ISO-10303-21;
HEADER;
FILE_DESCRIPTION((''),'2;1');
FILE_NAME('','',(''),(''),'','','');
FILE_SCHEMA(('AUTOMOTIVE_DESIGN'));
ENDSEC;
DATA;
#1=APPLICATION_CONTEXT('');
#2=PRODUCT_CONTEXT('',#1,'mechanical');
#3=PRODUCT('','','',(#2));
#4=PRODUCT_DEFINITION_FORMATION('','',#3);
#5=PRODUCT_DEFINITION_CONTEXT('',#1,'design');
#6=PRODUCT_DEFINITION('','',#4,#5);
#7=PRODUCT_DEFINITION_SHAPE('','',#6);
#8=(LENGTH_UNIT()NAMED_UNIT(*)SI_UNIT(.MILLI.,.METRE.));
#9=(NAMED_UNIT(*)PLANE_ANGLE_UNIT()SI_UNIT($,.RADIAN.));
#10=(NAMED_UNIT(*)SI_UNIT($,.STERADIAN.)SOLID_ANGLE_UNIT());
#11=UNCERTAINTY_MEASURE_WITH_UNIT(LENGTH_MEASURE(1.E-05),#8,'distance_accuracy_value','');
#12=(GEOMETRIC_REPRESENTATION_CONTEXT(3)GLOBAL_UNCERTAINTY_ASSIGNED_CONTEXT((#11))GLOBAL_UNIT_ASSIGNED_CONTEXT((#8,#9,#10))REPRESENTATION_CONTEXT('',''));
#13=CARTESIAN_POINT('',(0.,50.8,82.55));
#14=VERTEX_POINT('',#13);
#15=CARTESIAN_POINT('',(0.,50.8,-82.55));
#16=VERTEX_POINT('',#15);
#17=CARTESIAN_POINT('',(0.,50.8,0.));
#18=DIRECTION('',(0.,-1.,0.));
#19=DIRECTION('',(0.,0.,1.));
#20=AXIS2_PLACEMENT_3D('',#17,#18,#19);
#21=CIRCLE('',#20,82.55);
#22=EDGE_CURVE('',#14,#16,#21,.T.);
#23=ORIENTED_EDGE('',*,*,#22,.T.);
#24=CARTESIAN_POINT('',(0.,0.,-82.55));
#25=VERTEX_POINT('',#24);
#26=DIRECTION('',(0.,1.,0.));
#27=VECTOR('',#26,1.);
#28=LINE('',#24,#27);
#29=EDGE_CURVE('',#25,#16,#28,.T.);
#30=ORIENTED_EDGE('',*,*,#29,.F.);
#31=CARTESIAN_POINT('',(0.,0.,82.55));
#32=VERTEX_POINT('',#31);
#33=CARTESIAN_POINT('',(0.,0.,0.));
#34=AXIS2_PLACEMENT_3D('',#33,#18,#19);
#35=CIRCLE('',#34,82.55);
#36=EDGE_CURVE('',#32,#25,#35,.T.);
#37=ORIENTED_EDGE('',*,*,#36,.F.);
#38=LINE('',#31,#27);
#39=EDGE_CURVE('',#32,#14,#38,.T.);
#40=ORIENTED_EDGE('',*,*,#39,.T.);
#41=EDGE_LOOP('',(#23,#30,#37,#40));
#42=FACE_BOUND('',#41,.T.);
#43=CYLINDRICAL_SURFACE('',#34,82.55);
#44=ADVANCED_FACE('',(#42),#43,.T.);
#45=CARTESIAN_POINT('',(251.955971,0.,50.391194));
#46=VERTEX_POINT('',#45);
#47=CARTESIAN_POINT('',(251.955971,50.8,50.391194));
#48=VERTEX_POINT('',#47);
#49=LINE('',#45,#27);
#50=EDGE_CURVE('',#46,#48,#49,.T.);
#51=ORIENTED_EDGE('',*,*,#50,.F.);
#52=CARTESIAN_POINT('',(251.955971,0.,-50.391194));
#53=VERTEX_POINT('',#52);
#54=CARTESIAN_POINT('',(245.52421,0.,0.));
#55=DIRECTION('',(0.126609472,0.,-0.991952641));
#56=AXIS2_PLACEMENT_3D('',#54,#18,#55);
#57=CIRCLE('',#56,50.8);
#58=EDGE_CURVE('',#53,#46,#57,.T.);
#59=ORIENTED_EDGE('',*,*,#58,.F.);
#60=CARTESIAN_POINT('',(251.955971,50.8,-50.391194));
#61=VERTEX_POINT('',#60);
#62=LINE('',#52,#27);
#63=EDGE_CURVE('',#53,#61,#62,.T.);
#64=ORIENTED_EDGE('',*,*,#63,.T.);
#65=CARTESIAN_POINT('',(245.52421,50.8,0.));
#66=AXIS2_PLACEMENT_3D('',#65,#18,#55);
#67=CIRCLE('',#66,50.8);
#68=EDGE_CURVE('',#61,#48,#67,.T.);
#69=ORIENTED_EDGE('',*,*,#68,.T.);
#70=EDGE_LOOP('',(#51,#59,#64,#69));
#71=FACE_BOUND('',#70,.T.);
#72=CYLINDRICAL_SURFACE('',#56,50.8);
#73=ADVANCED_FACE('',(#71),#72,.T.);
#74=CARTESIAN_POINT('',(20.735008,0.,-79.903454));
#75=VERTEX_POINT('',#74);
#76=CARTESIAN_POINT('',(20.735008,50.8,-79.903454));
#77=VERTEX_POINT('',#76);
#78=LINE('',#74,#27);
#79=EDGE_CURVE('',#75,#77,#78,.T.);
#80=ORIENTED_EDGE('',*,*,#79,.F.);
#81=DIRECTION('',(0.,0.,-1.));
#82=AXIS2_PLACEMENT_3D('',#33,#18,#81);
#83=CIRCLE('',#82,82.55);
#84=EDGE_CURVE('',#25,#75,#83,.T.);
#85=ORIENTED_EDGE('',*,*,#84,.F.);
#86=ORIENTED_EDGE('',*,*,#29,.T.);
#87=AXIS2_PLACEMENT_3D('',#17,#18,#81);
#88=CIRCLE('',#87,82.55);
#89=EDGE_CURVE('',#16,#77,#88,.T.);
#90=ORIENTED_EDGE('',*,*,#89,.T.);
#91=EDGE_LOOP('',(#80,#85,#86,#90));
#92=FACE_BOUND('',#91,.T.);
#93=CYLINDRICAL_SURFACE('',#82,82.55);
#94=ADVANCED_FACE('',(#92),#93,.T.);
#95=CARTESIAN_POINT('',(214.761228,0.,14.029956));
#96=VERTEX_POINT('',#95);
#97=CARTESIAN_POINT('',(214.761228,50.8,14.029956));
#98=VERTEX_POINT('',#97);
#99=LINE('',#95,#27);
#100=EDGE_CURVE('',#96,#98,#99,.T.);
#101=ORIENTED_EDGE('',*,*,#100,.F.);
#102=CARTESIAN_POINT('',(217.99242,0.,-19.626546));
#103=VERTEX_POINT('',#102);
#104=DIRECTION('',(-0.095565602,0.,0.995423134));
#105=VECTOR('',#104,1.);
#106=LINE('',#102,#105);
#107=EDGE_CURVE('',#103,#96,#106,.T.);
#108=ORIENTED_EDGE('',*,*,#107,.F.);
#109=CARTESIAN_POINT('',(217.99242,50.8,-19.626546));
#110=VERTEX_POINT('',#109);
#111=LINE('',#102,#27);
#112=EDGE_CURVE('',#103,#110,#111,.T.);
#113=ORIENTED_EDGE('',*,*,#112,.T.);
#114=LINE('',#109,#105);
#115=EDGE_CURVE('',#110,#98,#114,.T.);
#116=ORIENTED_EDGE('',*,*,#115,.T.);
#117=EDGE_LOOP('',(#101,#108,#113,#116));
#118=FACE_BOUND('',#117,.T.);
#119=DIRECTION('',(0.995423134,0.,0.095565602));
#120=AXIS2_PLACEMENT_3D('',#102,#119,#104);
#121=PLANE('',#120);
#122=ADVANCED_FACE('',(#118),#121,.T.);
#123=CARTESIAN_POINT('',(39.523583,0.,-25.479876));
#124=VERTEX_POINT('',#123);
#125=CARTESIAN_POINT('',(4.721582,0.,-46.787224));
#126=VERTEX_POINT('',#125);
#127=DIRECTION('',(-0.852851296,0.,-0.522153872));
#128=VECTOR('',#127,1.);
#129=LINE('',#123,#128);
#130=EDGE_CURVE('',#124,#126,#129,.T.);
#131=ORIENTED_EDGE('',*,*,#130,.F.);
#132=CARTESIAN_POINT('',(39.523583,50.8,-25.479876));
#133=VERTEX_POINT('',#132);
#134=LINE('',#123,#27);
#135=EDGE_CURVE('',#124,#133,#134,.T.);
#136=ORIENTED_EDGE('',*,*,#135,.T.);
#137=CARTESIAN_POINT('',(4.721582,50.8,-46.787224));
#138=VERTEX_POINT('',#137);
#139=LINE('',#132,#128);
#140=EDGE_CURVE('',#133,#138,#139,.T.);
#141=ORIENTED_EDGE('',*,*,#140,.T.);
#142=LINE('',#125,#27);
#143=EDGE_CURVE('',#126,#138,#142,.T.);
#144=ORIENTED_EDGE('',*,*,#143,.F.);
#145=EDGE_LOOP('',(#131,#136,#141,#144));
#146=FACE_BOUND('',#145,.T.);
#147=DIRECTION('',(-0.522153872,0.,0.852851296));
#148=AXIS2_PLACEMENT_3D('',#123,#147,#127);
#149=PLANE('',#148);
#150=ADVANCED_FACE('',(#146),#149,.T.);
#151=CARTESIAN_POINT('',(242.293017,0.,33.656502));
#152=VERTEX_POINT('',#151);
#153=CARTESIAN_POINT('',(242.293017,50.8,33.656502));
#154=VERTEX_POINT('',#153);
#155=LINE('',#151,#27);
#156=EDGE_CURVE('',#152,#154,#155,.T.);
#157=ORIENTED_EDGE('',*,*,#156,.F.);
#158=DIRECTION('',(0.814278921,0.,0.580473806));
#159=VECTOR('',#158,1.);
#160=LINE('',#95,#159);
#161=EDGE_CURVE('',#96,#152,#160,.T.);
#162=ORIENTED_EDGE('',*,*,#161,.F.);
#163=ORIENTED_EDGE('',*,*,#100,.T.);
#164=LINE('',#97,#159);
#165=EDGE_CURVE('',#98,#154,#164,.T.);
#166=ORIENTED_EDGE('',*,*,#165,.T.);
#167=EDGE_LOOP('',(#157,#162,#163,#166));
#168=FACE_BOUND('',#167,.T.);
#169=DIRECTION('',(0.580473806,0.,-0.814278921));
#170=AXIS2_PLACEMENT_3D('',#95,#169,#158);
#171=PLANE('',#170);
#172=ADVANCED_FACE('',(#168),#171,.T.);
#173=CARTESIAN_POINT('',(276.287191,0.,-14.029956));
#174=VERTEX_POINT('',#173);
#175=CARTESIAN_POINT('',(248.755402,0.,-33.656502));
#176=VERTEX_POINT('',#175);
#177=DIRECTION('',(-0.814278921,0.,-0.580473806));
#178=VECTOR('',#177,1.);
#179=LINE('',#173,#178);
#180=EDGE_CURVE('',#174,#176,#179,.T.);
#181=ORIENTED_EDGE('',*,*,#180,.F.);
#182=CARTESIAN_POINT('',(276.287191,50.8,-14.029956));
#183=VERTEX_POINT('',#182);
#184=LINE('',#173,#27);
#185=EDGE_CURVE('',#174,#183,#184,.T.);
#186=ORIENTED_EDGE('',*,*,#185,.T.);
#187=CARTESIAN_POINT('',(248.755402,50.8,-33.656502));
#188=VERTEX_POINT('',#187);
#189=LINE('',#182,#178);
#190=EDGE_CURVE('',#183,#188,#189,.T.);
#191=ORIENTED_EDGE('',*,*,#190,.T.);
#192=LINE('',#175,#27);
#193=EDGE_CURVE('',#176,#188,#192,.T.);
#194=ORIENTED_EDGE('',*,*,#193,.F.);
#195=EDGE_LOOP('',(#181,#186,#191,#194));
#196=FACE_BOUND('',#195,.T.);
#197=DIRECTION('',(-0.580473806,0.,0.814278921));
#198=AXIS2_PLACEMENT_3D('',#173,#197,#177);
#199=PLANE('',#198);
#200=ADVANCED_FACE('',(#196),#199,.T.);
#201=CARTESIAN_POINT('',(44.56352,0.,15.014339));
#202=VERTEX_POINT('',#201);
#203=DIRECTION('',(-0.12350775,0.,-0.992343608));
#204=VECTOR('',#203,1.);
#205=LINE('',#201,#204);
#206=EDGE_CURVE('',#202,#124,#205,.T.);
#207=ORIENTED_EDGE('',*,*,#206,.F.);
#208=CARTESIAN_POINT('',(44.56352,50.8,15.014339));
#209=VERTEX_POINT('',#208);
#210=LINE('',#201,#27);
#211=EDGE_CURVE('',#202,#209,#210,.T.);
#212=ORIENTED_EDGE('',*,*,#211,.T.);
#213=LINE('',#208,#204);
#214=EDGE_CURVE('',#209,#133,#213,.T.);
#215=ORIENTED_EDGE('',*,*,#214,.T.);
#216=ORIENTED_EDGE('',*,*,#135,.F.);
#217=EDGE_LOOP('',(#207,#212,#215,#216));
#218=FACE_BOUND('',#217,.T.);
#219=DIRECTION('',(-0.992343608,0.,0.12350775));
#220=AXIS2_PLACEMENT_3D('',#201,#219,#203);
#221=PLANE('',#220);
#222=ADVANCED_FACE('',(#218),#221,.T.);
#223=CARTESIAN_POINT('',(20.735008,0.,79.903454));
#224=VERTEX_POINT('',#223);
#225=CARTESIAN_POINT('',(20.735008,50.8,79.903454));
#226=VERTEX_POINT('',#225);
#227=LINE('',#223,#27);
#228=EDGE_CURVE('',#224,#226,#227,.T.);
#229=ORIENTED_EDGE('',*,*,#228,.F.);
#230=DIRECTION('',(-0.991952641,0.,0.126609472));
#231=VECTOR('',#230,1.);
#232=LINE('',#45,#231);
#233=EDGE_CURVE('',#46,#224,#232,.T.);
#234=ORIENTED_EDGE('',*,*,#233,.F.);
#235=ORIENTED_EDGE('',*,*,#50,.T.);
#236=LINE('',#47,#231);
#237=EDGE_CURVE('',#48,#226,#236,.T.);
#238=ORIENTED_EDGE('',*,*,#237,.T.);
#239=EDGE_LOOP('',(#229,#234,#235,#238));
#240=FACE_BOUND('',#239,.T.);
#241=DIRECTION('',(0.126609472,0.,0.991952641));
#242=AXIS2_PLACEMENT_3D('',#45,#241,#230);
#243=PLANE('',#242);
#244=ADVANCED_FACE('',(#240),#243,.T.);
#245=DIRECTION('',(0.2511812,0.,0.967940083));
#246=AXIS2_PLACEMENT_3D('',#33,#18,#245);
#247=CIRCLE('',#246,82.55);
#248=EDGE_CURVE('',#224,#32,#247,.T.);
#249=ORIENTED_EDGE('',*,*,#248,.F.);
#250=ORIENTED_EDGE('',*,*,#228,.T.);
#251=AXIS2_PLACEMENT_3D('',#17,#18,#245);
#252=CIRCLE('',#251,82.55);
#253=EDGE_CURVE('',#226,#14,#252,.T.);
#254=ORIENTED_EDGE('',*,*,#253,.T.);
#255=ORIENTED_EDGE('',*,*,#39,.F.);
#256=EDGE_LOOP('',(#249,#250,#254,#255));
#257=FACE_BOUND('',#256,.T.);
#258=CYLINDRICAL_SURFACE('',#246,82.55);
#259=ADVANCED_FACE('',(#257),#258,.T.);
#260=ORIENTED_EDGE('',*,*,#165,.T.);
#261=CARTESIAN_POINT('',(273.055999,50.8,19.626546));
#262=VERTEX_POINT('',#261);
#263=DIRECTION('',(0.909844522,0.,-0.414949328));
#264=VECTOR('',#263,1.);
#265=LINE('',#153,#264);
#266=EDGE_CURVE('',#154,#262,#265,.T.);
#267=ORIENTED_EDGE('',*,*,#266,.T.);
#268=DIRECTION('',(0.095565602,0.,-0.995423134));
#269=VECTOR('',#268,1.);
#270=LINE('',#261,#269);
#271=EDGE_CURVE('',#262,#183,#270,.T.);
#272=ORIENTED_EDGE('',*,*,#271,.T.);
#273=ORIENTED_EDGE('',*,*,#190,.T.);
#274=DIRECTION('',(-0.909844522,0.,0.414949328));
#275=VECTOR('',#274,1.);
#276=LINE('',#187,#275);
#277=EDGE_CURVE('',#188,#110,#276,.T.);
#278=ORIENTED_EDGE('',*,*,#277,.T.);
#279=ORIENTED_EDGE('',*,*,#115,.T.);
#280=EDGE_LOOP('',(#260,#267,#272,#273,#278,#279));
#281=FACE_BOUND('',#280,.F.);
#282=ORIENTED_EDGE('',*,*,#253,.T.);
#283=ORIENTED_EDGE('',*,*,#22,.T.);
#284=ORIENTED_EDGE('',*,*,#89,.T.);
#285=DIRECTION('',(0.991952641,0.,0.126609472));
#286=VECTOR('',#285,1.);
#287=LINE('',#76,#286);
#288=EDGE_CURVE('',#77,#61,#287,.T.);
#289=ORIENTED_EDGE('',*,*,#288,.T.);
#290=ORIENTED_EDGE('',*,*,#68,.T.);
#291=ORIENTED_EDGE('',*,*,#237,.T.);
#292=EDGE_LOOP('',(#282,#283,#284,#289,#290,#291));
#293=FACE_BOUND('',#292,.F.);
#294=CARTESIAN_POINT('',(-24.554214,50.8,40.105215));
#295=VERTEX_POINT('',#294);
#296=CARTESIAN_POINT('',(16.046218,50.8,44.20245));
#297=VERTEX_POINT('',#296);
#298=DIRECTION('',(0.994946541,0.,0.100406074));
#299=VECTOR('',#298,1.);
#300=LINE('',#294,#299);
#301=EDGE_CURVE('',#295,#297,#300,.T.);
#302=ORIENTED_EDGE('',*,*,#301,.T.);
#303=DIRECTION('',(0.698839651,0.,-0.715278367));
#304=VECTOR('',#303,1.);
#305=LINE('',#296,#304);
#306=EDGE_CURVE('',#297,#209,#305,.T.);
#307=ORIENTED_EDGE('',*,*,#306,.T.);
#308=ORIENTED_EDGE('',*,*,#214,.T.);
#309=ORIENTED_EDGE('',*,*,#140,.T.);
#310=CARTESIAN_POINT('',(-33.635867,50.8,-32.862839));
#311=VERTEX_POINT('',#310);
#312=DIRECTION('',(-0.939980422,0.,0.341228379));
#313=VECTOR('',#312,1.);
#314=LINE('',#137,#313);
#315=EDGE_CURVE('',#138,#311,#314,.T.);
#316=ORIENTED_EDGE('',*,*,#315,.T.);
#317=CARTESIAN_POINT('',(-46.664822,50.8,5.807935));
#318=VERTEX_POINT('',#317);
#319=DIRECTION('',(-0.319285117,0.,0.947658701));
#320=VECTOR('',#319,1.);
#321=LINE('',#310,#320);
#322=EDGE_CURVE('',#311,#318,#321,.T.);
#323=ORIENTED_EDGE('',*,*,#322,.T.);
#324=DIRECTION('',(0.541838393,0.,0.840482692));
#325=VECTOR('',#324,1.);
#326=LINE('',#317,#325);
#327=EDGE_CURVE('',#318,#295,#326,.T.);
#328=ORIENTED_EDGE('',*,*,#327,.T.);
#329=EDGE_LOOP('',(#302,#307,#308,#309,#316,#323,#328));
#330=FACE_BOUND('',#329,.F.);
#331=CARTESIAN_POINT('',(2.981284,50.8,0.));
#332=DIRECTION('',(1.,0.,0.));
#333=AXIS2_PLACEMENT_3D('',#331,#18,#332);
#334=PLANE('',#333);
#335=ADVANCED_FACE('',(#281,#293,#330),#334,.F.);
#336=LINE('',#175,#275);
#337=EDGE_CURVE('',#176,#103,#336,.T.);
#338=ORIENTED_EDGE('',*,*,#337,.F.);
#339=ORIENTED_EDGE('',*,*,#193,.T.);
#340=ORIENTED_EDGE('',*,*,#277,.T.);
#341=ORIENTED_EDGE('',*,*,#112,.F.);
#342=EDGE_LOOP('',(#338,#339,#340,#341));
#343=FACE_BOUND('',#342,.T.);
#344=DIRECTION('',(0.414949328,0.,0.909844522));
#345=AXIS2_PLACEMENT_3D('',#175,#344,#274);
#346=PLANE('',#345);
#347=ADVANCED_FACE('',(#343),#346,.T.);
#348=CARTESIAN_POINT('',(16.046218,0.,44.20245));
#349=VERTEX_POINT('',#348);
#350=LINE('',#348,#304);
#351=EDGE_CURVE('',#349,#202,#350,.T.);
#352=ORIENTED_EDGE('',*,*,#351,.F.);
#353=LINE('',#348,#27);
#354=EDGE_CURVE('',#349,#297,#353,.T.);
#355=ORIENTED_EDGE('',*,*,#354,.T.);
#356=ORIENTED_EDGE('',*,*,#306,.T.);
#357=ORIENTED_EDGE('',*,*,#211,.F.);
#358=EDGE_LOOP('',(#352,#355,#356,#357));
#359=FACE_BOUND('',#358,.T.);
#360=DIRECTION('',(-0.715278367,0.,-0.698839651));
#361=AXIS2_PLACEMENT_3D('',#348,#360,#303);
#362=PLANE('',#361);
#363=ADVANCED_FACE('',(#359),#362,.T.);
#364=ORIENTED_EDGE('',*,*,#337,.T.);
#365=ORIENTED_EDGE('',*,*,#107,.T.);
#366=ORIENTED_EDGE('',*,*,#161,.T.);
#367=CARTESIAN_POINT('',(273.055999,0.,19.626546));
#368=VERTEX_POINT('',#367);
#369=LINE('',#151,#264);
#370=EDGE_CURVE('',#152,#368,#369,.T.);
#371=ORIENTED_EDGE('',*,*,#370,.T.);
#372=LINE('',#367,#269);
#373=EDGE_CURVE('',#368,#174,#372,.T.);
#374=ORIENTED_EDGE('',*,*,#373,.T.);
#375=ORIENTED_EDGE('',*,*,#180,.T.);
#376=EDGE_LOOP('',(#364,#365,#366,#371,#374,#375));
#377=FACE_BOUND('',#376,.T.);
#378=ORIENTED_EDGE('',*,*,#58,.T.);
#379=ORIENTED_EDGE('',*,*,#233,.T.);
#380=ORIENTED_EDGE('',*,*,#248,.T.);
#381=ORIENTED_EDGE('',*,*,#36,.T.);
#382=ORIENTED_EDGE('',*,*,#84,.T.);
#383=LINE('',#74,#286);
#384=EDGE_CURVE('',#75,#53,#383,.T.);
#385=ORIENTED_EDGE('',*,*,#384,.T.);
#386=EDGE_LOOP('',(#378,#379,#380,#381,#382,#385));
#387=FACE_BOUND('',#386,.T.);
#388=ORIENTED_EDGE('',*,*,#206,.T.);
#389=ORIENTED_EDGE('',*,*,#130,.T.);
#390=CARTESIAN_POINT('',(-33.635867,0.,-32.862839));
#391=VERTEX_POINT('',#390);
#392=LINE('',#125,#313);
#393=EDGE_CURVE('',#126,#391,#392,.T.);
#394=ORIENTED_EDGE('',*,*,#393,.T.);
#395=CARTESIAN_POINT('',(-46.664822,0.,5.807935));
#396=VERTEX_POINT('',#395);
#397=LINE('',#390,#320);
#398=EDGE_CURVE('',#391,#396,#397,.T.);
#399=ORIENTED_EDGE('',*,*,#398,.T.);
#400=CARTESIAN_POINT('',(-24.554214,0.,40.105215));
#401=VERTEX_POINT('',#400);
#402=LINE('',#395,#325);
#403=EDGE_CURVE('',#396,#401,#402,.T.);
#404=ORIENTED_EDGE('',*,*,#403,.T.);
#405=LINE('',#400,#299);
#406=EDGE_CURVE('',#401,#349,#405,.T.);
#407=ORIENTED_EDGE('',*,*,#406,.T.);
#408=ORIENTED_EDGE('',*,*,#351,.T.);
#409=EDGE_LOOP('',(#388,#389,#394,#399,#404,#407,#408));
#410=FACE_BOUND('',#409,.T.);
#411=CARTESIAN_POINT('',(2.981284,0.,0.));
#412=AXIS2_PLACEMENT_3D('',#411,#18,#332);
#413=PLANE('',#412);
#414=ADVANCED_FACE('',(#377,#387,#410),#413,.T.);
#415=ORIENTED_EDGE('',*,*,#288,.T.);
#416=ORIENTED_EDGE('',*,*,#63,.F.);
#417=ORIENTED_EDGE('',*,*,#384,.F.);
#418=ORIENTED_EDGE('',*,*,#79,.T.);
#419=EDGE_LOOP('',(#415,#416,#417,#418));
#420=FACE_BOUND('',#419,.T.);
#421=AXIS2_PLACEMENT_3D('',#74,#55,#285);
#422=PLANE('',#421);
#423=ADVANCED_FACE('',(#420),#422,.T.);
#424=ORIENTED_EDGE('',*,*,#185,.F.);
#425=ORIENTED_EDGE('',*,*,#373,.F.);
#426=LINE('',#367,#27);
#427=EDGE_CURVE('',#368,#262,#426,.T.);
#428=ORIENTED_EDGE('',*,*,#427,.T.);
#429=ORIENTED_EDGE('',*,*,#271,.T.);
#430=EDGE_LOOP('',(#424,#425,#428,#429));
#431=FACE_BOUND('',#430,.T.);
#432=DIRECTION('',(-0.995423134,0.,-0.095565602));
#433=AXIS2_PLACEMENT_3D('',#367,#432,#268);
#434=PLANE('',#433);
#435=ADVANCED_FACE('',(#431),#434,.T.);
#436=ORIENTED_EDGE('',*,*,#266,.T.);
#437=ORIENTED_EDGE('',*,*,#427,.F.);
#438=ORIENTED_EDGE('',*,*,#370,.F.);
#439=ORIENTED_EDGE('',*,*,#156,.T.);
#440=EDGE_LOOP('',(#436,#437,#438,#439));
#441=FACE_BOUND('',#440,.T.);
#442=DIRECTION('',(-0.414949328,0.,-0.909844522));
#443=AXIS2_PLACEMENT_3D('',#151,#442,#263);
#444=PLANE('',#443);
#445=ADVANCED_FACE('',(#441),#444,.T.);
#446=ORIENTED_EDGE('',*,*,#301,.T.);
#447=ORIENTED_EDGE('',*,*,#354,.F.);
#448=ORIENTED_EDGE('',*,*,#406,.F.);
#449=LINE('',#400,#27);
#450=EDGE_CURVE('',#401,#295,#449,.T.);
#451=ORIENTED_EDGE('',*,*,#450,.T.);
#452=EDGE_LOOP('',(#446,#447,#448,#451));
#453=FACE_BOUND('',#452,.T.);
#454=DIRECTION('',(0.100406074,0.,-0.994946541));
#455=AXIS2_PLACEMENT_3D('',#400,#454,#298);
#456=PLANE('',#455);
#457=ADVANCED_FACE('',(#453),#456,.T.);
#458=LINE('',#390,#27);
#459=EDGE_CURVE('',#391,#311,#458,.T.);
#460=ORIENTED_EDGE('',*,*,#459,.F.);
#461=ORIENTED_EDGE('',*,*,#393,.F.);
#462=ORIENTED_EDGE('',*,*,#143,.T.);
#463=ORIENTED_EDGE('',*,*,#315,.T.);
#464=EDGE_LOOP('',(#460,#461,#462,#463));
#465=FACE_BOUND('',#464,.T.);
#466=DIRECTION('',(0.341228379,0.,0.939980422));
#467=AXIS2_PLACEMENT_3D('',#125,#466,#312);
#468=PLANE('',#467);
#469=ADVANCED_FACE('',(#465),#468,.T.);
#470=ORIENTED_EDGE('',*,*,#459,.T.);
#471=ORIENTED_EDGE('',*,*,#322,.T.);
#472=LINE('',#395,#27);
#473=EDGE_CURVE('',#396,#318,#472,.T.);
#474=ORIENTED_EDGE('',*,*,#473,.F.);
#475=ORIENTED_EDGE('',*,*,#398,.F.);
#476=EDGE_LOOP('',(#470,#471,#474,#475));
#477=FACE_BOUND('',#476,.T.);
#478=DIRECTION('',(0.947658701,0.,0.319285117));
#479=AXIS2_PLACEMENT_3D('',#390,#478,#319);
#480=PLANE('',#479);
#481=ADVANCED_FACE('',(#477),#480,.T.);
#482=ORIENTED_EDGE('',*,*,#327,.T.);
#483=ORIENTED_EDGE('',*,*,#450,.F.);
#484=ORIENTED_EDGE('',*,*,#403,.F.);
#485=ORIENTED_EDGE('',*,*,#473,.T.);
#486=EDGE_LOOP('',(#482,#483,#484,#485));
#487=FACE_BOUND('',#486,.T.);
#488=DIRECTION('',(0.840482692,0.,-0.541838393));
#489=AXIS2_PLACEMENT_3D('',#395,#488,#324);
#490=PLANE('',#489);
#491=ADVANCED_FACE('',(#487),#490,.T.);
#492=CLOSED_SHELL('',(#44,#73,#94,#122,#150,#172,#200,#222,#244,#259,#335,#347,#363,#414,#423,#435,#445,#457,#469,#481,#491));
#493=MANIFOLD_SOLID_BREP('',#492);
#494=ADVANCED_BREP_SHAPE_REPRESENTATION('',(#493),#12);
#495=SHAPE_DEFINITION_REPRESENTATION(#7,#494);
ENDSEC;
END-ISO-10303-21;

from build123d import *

# Parameters (mm, degrees)
F1_DEPTH = 50.8


# Not quite as in the source:
# - a feature names something its author has since deleted; it is built from what else it names


with BuildPart() as f1:
    # F0 (on Front) → F1 (new body)
    with BuildSketch(Plane.XZ):
        with BuildLine():
            Line((20.7350080501, 79.903453875), (0, 82.55))
            ThreePointArc((0, 82.55), (-82.55, 0), (0, -82.55))
            Line((0, -82.55), (20.7350080501, -79.903453875))
            ThreePointArc((20.7350080501, -79.903453875), (65.2923326836, -50.511521386), (82.55, 0))
            ThreePointArc((82.55, 0), (65.2923326836, 50.511521386), (20.7350080501, 79.903453875))
        make_face()
        Polygon((44.563520115, 15.0143387373), (39.5235830399, -25.4798759112), (4.7215818015, -46.7872243038), (-33.6358668361, -32.8628385102), (-46.6648216995, 5.8079349613), (-24.5542140343, 40.1052149467), (16.0462176134, 44.2024500799), align=None, mode=Mode.SUBTRACT)
        with BuildLine():
            ThreePointArc((20.7350080501, 79.903453875), (10.4516119, 81.8856905002), (0, 82.55))
            Line((0, 82.55), (20.7350080501, 79.903453875))
        make_face()
        with BuildLine():
            Line((20.7350080501, -79.903453875), (0, -82.55))
            ThreePointArc((0, -82.55), (10.4516119, -81.8856905002), (20.7350080501, -79.903453875))
        make_face()
        with BuildLine():
            Line((251.9559707698, 50.391194154), (20.7350080501, 79.903453875))
            ThreePointArc((20.7350080501, 79.903453875), (65.2923326836, 50.511521386), (82.55, 0))
            ThreePointArc((82.55, 0), (65.2923326836, -50.511521386), (20.7350080501, -79.903453875))
            Line((20.7350080501, -79.903453875), (251.9559707698, -50.391194154))
            ThreePointArc((251.9559707698, -50.391194154), (194.7242096006, 0), (251.9559707698, 50.391194154))
        make_face()
        with BuildLine():
            ThreePointArc((296.3242096006, 0), (283.6514535831, 33.5701246096), (251.9559707698, 50.391194154))
            ThreePointArc((251.9559707698, 50.391194154), (194.7242096006, 0), (251.9559707698, -50.391194154))
            ThreePointArc((251.9559707698, -50.391194154), (283.6514535831, -33.5701246096), (296.3242096006, 0))
        make_face()
        Polygon((273.0559987523, 19.6265456703), (276.2871913154, -14.0299559819), (248.7554021637, -33.6565016521), (217.9924204489, -19.6265456703), (214.7612278858, 14.0299559819), (242.2930170375, 33.6565016521), align=None, mode=Mode.SUBTRACT)
    extrude(amount=-F1_DEPTH)


solid = f1.part
